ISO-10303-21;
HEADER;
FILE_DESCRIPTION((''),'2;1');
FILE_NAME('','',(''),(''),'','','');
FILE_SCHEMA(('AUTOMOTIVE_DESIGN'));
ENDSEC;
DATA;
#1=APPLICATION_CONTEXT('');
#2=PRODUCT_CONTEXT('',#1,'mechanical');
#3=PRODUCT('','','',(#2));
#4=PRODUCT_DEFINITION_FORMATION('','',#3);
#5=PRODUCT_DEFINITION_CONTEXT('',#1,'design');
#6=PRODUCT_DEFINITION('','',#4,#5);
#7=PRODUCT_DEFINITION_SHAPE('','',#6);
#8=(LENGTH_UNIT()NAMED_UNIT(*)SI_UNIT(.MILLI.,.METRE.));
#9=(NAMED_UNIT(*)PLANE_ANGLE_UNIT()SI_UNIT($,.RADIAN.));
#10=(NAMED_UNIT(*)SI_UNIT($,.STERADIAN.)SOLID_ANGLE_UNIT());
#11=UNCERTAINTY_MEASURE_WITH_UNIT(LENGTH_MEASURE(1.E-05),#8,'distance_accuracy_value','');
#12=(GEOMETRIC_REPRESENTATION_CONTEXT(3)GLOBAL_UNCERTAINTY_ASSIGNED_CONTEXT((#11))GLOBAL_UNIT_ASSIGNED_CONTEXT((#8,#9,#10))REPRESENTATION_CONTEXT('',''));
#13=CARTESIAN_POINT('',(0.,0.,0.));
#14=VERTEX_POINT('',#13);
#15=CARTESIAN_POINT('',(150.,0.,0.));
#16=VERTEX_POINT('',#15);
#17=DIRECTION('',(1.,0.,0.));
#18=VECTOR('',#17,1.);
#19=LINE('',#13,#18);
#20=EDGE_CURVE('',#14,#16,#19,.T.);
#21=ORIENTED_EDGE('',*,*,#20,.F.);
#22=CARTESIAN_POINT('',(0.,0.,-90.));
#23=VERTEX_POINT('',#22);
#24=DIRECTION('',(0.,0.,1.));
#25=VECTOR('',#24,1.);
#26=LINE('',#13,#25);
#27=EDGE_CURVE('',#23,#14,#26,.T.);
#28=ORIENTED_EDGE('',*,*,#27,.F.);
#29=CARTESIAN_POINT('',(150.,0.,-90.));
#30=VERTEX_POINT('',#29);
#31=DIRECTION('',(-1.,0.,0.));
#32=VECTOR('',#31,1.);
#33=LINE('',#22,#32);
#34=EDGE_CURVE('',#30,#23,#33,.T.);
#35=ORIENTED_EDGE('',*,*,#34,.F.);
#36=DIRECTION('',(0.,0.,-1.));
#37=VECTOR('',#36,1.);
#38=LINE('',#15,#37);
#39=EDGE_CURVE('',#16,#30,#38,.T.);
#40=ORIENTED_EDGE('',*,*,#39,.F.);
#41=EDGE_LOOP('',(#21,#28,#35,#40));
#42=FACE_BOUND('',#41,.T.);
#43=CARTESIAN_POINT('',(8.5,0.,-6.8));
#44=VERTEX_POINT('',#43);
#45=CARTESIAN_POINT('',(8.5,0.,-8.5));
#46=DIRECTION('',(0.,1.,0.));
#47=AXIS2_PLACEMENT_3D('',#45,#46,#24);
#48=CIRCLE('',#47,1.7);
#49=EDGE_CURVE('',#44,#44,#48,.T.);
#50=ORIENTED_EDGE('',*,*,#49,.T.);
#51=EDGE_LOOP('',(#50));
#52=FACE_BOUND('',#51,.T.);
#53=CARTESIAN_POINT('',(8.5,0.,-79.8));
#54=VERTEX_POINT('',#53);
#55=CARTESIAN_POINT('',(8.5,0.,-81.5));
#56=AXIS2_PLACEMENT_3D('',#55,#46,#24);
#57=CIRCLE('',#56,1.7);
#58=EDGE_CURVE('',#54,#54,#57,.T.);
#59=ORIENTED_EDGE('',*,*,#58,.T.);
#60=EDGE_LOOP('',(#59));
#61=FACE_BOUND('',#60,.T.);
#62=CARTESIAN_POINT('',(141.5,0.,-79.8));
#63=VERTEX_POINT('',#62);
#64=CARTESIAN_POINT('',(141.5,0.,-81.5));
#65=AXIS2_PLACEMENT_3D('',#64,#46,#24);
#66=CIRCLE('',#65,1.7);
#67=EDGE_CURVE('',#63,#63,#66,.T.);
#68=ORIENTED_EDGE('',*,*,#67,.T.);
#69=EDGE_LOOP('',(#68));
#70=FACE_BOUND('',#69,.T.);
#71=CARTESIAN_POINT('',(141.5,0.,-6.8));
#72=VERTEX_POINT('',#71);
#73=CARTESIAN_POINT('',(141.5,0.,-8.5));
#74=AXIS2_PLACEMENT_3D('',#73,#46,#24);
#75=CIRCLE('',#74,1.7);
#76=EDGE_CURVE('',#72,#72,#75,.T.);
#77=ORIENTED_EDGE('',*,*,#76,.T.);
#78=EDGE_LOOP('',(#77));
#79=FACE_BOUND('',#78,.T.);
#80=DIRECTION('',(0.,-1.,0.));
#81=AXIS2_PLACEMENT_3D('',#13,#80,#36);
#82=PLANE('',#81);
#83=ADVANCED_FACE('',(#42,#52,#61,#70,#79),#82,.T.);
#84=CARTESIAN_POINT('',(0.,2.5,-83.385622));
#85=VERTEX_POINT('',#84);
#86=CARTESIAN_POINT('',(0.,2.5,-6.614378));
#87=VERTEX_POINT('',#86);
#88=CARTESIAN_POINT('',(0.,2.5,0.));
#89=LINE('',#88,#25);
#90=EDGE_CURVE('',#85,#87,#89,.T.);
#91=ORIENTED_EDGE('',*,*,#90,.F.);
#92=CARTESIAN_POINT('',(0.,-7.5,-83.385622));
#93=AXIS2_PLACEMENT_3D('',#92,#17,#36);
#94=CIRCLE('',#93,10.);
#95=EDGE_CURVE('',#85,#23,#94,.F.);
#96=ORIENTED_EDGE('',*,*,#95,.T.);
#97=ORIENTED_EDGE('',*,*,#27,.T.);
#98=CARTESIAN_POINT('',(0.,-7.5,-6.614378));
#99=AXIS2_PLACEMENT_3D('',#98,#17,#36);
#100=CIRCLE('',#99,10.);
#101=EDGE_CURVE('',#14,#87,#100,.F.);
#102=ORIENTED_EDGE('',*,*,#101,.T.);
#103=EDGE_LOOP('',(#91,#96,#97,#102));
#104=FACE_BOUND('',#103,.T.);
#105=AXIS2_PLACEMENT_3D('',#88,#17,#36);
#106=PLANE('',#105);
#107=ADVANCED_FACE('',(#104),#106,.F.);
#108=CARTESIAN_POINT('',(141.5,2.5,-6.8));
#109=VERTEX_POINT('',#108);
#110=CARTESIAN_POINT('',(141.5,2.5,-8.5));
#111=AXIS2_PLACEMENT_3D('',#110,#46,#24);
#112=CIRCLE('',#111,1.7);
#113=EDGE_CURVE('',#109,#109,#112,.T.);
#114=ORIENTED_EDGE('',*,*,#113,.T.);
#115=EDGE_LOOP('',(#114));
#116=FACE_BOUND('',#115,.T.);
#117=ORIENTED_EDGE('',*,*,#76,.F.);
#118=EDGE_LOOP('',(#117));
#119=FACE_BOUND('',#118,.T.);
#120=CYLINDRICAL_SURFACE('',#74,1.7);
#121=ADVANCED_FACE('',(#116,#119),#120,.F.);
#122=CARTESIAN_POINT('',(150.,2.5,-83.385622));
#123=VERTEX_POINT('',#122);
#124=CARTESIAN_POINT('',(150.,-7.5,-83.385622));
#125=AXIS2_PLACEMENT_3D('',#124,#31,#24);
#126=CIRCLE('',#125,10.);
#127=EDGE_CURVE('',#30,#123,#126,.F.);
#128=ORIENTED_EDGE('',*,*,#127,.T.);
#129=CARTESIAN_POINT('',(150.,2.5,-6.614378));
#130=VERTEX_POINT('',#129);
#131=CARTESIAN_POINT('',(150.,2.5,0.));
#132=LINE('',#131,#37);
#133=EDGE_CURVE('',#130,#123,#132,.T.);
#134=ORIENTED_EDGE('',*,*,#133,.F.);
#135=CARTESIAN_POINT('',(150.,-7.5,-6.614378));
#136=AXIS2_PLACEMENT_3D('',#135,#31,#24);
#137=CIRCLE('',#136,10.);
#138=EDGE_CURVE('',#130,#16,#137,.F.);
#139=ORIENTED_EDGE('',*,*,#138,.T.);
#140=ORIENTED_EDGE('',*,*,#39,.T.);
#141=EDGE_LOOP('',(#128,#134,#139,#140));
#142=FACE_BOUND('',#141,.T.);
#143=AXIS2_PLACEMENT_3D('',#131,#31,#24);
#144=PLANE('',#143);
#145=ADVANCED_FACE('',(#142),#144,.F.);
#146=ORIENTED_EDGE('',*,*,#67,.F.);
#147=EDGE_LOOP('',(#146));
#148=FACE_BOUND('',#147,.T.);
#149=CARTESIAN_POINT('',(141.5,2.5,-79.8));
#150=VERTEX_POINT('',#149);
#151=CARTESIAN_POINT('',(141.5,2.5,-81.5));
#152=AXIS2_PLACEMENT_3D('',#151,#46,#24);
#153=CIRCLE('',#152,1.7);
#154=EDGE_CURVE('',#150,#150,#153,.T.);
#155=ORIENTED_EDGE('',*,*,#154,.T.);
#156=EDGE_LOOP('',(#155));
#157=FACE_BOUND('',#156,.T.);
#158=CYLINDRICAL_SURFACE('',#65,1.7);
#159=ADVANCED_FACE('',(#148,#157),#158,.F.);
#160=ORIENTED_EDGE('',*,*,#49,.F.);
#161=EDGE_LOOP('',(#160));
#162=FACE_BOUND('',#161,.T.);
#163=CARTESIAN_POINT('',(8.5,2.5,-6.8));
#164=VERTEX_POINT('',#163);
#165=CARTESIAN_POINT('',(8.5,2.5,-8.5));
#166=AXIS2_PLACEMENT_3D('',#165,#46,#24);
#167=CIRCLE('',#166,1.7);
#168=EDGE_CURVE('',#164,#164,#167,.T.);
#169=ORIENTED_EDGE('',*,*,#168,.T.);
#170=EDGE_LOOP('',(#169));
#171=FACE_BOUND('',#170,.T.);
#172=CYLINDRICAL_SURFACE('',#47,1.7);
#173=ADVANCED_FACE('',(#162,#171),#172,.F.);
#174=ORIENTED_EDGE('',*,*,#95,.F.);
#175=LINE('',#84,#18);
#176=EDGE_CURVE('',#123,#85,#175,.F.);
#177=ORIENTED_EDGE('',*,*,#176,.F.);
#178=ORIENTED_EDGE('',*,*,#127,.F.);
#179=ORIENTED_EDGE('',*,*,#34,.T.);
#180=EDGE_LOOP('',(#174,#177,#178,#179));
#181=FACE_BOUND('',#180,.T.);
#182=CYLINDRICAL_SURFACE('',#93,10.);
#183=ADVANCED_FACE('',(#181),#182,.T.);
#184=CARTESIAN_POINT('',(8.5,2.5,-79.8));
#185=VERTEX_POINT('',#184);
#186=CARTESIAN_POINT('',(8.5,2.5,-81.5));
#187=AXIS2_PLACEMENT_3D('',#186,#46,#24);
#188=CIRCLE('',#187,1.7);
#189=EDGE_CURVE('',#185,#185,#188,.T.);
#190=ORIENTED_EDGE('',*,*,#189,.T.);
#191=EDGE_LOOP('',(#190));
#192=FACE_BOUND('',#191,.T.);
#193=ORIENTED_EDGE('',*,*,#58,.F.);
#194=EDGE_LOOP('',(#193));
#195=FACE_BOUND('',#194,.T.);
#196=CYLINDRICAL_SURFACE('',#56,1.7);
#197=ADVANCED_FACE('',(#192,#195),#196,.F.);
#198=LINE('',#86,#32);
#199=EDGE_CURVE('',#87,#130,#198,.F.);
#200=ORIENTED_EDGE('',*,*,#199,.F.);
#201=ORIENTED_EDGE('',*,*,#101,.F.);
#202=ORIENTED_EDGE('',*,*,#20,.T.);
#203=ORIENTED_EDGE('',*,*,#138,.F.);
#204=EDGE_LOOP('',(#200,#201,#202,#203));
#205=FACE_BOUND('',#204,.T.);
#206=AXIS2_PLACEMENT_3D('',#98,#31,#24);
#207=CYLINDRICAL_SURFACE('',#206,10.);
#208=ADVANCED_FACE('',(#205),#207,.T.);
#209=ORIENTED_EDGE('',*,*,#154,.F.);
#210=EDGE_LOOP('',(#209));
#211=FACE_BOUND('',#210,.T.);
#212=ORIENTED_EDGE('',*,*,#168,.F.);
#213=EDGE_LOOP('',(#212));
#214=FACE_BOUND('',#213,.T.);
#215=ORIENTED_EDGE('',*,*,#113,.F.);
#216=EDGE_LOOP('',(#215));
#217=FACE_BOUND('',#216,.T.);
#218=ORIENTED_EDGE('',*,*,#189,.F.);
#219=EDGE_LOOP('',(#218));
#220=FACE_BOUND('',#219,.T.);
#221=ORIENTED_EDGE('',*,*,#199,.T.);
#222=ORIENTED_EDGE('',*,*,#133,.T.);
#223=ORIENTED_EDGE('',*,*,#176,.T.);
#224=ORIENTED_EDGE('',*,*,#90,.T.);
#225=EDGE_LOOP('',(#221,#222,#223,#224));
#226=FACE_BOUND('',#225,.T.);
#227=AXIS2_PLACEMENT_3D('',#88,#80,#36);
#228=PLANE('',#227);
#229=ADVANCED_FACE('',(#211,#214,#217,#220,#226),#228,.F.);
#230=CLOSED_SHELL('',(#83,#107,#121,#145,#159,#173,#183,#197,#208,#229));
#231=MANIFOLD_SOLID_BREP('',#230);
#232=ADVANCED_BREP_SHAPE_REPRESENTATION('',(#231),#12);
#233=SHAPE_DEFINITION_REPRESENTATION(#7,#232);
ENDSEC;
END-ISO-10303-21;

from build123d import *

# Parameters (mm, degrees)
SKETCH1_W           = 150
SKETCH1_H           = 90
BOSS_EXTRUDE1_DEPTH = 2.5
FILLET1_R           = 10
FILLET2_R           = 10
SKETCH2_R           = 1.7
CUT_EXTRUDE1_DEPTH  = 2.5


with BuildPart() as part:
    # Sketch1 → Boss-Extrude1 (new body)
    with BuildSketch(Plane(origin=(0, 0, 0), x_dir=(1, 0, 0), z_dir=(0, 1, 0))):
        with Locations((75, 45)):
            Rectangle(SKETCH1_W, SKETCH1_H)
    extrude(amount=BOSS_EXTRUDE1_DEPTH)

    # Fillet1
    # the kernel refuses this fillet: 10 mm, written as the material it takes off along each edge
    with BuildSketch(Plane(origin=(-16.535945694, 2.5, 0), x_dir=(0, -1, 0), z_dir=(1, 0, 0))) as fillet1_piece_1:
        with BuildLine():
            CenterArc((10, 6.614378278), FILLET1_R, 180, 41.409622109)
            Line((0, 6.614378278), (-0.2, 6.614378278))
            Line((-0.2, 6.614378278), (-0.2, 0))
            Line((-0.2, 0), (0, -0.2))
            ThreePointArc((0, -0.2), (1.25, -0.2), (2.35, -0.132287566))
            Line((2.35, -0.132287566), (2.5, 0))
        make_face()
    extrude(amount=183.071891388, mode=Mode.SUBTRACT)

    # Fillet2
    # the kernel refuses this fillet: 10 mm, written as the material it takes off along each edge
    with BuildSketch(Plane(origin=(166.535945694, 2.5, -90), x_dir=(0, -1, 0), z_dir=(-1, 0, 0))) as fillet2_piece_1:
        with BuildLine():
            CenterArc((10, 6.614378278), FILLET2_R, 180, 41.409622109)
            Line((0, 6.614378278), (-0.2, 6.614378278))
            Line((-0.2, 6.614378278), (-0.2, 0))
            Line((-0.2, 0), (0, -0.2))
            ThreePointArc((0, -0.2), (1.25, -0.2), (2.35, -0.132287566))
            Line((2.35, -0.132287566), (2.5, 0))
        make_face()
    extrude(amount=183.071891388, mode=Mode.SUBTRACT)

    # Sketch2 → Cut-Extrude1 (cut)
    with BuildSketch(Plane(origin=(0, 2.5, 0), x_dir=(1, 0, 0), z_dir=(0, 1, 0))):
        with Locations(Location((8.5, 81.5, 0), (0, 0, 270))):
            Circle(SKETCH2_R)
        with Locations(Location((8.5, 8.5, 0), (0, 0, 270))):
            Circle(SKETCH2_R)
        with Locations(Location((141.5, 81.5, 0), (0, 0, 270))):
            Circle(SKETCH2_R)
        with Locations(Location((141.5, 8.5, 0), (0, 0, 270))):
            Circle(SKETCH2_R)
    extrude(amount=-CUT_EXTRUDE1_DEPTH, mode=Mode.SUBTRACT)


solid = part.part
